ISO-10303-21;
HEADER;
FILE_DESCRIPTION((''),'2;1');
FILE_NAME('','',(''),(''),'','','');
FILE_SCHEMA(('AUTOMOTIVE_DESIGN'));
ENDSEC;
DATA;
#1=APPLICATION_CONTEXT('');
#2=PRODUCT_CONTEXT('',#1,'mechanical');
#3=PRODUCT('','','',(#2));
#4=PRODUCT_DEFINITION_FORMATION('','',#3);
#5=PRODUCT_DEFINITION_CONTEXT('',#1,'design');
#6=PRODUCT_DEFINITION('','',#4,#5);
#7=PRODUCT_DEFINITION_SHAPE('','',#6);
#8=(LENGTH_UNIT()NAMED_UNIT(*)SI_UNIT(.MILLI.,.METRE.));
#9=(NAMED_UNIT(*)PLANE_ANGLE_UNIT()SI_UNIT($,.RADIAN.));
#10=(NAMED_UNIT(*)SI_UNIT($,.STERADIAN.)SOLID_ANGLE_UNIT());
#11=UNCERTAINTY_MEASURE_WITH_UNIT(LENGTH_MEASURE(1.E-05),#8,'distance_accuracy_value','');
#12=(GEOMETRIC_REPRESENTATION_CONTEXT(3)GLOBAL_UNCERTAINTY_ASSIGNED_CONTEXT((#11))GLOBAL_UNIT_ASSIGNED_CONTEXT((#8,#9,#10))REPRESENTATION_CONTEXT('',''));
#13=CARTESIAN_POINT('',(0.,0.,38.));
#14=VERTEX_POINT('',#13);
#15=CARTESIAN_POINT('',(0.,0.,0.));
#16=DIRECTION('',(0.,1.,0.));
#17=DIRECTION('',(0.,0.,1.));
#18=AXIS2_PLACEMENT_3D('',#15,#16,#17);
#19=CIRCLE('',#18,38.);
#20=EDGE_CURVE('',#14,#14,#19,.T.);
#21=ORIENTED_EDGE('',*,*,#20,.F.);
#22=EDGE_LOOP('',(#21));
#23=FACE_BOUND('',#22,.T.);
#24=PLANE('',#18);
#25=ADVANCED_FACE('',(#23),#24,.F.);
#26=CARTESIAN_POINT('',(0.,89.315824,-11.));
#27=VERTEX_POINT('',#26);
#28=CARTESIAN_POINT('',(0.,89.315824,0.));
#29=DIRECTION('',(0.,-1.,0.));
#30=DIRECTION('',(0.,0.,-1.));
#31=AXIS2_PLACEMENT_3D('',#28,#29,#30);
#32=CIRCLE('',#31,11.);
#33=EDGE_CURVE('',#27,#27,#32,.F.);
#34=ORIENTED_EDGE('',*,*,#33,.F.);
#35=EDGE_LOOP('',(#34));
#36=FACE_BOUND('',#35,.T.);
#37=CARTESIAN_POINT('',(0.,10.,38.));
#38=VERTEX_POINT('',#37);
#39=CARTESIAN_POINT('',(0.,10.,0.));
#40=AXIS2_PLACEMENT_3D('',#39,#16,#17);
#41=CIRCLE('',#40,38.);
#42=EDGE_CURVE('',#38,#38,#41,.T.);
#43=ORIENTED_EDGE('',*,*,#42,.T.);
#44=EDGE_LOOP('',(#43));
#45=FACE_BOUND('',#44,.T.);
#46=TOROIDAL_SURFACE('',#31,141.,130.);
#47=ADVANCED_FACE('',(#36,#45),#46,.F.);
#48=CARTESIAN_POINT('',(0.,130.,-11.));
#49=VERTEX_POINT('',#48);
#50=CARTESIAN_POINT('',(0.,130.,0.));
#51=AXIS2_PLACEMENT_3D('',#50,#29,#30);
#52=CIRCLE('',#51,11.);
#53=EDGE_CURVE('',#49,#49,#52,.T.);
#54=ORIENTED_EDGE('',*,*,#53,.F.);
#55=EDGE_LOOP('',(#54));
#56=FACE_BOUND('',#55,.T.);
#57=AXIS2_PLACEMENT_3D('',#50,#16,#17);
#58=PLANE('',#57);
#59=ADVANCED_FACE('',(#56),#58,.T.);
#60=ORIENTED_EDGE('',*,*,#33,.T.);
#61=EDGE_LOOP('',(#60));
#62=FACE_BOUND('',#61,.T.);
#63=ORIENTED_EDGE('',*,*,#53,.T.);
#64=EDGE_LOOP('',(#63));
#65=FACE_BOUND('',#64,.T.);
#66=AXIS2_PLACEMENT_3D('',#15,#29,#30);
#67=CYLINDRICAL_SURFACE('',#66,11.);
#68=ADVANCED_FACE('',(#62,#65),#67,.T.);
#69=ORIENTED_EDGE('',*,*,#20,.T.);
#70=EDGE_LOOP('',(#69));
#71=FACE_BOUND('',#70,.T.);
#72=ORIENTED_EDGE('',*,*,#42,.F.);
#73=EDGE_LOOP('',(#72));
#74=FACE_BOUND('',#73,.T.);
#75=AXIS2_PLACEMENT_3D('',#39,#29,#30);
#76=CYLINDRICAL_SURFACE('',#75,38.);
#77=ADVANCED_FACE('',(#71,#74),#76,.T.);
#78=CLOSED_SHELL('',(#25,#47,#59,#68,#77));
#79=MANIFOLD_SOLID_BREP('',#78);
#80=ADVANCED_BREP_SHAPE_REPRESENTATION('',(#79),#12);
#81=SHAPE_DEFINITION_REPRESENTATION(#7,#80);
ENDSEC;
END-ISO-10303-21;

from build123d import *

# Parameters (mm, degrees)
SKETCH_1_R      = 38
EXTRUDE_1_DEPTH = 10
FILLET_1_R      = 130


with BuildPart() as part:
    # 草图1 → 凸台-拉伸1 (new body)
    with BuildSketch(Plane(origin=(0, 0, 0), x_dir=(1, 0, 0), z_dir=(0, 1, 0))):
        with Locations(Location((0, 0, 0), (0, 0, 270))):
            Circle(SKETCH_1_R)
    extrude(amount=EXTRUDE_1_DEPTH)

    # 草图3 → 旋转1 (revolve)
    with BuildSketch(Plane.XY, mode=Mode.PRIVATE) as revolve_1_sk:
        Polygon((0, 130), (11, 130), (11, 40), (38, 10), (0, 10), align=None)
    revolve(revolve_1_sk.sketch.rotate(Axis((0, 0, 0), (0, 1, 0)), 90), axis=Axis((0, 0, 0), (0, 1, 0)))

    # 圆角1
    # the kernel refuses this fillet: 130 mm, written as the material it adds along each edge
    with BuildSketch(Plane(origin=(0, 40, 0), x_dir=(0, 0, -1), z_dir=(1, 0, 0))) as fillet_1_piece_1:
        with BuildLine():
            CenterArc((141, 49.315824398), FILLET_1_R, 180, 37.598305078)
            Line((11, 49.315824398), (8.4, 49.315824398))
            Line((8.4, 49.315824398), (8.4, 0))
            Line((8.4, 0), (9.06743522, -1.739308302))
            ThreePointArc((9.06743522, -1.739308302), (22.56743522, -16.739308302), (35.94, -31.586316488))
            Line((35.94, -31.586316488), (38, -30))
        make_face()
    revolve(axis=Axis((0, 40, 0), (0, 1, 0)))


solid = part.part
